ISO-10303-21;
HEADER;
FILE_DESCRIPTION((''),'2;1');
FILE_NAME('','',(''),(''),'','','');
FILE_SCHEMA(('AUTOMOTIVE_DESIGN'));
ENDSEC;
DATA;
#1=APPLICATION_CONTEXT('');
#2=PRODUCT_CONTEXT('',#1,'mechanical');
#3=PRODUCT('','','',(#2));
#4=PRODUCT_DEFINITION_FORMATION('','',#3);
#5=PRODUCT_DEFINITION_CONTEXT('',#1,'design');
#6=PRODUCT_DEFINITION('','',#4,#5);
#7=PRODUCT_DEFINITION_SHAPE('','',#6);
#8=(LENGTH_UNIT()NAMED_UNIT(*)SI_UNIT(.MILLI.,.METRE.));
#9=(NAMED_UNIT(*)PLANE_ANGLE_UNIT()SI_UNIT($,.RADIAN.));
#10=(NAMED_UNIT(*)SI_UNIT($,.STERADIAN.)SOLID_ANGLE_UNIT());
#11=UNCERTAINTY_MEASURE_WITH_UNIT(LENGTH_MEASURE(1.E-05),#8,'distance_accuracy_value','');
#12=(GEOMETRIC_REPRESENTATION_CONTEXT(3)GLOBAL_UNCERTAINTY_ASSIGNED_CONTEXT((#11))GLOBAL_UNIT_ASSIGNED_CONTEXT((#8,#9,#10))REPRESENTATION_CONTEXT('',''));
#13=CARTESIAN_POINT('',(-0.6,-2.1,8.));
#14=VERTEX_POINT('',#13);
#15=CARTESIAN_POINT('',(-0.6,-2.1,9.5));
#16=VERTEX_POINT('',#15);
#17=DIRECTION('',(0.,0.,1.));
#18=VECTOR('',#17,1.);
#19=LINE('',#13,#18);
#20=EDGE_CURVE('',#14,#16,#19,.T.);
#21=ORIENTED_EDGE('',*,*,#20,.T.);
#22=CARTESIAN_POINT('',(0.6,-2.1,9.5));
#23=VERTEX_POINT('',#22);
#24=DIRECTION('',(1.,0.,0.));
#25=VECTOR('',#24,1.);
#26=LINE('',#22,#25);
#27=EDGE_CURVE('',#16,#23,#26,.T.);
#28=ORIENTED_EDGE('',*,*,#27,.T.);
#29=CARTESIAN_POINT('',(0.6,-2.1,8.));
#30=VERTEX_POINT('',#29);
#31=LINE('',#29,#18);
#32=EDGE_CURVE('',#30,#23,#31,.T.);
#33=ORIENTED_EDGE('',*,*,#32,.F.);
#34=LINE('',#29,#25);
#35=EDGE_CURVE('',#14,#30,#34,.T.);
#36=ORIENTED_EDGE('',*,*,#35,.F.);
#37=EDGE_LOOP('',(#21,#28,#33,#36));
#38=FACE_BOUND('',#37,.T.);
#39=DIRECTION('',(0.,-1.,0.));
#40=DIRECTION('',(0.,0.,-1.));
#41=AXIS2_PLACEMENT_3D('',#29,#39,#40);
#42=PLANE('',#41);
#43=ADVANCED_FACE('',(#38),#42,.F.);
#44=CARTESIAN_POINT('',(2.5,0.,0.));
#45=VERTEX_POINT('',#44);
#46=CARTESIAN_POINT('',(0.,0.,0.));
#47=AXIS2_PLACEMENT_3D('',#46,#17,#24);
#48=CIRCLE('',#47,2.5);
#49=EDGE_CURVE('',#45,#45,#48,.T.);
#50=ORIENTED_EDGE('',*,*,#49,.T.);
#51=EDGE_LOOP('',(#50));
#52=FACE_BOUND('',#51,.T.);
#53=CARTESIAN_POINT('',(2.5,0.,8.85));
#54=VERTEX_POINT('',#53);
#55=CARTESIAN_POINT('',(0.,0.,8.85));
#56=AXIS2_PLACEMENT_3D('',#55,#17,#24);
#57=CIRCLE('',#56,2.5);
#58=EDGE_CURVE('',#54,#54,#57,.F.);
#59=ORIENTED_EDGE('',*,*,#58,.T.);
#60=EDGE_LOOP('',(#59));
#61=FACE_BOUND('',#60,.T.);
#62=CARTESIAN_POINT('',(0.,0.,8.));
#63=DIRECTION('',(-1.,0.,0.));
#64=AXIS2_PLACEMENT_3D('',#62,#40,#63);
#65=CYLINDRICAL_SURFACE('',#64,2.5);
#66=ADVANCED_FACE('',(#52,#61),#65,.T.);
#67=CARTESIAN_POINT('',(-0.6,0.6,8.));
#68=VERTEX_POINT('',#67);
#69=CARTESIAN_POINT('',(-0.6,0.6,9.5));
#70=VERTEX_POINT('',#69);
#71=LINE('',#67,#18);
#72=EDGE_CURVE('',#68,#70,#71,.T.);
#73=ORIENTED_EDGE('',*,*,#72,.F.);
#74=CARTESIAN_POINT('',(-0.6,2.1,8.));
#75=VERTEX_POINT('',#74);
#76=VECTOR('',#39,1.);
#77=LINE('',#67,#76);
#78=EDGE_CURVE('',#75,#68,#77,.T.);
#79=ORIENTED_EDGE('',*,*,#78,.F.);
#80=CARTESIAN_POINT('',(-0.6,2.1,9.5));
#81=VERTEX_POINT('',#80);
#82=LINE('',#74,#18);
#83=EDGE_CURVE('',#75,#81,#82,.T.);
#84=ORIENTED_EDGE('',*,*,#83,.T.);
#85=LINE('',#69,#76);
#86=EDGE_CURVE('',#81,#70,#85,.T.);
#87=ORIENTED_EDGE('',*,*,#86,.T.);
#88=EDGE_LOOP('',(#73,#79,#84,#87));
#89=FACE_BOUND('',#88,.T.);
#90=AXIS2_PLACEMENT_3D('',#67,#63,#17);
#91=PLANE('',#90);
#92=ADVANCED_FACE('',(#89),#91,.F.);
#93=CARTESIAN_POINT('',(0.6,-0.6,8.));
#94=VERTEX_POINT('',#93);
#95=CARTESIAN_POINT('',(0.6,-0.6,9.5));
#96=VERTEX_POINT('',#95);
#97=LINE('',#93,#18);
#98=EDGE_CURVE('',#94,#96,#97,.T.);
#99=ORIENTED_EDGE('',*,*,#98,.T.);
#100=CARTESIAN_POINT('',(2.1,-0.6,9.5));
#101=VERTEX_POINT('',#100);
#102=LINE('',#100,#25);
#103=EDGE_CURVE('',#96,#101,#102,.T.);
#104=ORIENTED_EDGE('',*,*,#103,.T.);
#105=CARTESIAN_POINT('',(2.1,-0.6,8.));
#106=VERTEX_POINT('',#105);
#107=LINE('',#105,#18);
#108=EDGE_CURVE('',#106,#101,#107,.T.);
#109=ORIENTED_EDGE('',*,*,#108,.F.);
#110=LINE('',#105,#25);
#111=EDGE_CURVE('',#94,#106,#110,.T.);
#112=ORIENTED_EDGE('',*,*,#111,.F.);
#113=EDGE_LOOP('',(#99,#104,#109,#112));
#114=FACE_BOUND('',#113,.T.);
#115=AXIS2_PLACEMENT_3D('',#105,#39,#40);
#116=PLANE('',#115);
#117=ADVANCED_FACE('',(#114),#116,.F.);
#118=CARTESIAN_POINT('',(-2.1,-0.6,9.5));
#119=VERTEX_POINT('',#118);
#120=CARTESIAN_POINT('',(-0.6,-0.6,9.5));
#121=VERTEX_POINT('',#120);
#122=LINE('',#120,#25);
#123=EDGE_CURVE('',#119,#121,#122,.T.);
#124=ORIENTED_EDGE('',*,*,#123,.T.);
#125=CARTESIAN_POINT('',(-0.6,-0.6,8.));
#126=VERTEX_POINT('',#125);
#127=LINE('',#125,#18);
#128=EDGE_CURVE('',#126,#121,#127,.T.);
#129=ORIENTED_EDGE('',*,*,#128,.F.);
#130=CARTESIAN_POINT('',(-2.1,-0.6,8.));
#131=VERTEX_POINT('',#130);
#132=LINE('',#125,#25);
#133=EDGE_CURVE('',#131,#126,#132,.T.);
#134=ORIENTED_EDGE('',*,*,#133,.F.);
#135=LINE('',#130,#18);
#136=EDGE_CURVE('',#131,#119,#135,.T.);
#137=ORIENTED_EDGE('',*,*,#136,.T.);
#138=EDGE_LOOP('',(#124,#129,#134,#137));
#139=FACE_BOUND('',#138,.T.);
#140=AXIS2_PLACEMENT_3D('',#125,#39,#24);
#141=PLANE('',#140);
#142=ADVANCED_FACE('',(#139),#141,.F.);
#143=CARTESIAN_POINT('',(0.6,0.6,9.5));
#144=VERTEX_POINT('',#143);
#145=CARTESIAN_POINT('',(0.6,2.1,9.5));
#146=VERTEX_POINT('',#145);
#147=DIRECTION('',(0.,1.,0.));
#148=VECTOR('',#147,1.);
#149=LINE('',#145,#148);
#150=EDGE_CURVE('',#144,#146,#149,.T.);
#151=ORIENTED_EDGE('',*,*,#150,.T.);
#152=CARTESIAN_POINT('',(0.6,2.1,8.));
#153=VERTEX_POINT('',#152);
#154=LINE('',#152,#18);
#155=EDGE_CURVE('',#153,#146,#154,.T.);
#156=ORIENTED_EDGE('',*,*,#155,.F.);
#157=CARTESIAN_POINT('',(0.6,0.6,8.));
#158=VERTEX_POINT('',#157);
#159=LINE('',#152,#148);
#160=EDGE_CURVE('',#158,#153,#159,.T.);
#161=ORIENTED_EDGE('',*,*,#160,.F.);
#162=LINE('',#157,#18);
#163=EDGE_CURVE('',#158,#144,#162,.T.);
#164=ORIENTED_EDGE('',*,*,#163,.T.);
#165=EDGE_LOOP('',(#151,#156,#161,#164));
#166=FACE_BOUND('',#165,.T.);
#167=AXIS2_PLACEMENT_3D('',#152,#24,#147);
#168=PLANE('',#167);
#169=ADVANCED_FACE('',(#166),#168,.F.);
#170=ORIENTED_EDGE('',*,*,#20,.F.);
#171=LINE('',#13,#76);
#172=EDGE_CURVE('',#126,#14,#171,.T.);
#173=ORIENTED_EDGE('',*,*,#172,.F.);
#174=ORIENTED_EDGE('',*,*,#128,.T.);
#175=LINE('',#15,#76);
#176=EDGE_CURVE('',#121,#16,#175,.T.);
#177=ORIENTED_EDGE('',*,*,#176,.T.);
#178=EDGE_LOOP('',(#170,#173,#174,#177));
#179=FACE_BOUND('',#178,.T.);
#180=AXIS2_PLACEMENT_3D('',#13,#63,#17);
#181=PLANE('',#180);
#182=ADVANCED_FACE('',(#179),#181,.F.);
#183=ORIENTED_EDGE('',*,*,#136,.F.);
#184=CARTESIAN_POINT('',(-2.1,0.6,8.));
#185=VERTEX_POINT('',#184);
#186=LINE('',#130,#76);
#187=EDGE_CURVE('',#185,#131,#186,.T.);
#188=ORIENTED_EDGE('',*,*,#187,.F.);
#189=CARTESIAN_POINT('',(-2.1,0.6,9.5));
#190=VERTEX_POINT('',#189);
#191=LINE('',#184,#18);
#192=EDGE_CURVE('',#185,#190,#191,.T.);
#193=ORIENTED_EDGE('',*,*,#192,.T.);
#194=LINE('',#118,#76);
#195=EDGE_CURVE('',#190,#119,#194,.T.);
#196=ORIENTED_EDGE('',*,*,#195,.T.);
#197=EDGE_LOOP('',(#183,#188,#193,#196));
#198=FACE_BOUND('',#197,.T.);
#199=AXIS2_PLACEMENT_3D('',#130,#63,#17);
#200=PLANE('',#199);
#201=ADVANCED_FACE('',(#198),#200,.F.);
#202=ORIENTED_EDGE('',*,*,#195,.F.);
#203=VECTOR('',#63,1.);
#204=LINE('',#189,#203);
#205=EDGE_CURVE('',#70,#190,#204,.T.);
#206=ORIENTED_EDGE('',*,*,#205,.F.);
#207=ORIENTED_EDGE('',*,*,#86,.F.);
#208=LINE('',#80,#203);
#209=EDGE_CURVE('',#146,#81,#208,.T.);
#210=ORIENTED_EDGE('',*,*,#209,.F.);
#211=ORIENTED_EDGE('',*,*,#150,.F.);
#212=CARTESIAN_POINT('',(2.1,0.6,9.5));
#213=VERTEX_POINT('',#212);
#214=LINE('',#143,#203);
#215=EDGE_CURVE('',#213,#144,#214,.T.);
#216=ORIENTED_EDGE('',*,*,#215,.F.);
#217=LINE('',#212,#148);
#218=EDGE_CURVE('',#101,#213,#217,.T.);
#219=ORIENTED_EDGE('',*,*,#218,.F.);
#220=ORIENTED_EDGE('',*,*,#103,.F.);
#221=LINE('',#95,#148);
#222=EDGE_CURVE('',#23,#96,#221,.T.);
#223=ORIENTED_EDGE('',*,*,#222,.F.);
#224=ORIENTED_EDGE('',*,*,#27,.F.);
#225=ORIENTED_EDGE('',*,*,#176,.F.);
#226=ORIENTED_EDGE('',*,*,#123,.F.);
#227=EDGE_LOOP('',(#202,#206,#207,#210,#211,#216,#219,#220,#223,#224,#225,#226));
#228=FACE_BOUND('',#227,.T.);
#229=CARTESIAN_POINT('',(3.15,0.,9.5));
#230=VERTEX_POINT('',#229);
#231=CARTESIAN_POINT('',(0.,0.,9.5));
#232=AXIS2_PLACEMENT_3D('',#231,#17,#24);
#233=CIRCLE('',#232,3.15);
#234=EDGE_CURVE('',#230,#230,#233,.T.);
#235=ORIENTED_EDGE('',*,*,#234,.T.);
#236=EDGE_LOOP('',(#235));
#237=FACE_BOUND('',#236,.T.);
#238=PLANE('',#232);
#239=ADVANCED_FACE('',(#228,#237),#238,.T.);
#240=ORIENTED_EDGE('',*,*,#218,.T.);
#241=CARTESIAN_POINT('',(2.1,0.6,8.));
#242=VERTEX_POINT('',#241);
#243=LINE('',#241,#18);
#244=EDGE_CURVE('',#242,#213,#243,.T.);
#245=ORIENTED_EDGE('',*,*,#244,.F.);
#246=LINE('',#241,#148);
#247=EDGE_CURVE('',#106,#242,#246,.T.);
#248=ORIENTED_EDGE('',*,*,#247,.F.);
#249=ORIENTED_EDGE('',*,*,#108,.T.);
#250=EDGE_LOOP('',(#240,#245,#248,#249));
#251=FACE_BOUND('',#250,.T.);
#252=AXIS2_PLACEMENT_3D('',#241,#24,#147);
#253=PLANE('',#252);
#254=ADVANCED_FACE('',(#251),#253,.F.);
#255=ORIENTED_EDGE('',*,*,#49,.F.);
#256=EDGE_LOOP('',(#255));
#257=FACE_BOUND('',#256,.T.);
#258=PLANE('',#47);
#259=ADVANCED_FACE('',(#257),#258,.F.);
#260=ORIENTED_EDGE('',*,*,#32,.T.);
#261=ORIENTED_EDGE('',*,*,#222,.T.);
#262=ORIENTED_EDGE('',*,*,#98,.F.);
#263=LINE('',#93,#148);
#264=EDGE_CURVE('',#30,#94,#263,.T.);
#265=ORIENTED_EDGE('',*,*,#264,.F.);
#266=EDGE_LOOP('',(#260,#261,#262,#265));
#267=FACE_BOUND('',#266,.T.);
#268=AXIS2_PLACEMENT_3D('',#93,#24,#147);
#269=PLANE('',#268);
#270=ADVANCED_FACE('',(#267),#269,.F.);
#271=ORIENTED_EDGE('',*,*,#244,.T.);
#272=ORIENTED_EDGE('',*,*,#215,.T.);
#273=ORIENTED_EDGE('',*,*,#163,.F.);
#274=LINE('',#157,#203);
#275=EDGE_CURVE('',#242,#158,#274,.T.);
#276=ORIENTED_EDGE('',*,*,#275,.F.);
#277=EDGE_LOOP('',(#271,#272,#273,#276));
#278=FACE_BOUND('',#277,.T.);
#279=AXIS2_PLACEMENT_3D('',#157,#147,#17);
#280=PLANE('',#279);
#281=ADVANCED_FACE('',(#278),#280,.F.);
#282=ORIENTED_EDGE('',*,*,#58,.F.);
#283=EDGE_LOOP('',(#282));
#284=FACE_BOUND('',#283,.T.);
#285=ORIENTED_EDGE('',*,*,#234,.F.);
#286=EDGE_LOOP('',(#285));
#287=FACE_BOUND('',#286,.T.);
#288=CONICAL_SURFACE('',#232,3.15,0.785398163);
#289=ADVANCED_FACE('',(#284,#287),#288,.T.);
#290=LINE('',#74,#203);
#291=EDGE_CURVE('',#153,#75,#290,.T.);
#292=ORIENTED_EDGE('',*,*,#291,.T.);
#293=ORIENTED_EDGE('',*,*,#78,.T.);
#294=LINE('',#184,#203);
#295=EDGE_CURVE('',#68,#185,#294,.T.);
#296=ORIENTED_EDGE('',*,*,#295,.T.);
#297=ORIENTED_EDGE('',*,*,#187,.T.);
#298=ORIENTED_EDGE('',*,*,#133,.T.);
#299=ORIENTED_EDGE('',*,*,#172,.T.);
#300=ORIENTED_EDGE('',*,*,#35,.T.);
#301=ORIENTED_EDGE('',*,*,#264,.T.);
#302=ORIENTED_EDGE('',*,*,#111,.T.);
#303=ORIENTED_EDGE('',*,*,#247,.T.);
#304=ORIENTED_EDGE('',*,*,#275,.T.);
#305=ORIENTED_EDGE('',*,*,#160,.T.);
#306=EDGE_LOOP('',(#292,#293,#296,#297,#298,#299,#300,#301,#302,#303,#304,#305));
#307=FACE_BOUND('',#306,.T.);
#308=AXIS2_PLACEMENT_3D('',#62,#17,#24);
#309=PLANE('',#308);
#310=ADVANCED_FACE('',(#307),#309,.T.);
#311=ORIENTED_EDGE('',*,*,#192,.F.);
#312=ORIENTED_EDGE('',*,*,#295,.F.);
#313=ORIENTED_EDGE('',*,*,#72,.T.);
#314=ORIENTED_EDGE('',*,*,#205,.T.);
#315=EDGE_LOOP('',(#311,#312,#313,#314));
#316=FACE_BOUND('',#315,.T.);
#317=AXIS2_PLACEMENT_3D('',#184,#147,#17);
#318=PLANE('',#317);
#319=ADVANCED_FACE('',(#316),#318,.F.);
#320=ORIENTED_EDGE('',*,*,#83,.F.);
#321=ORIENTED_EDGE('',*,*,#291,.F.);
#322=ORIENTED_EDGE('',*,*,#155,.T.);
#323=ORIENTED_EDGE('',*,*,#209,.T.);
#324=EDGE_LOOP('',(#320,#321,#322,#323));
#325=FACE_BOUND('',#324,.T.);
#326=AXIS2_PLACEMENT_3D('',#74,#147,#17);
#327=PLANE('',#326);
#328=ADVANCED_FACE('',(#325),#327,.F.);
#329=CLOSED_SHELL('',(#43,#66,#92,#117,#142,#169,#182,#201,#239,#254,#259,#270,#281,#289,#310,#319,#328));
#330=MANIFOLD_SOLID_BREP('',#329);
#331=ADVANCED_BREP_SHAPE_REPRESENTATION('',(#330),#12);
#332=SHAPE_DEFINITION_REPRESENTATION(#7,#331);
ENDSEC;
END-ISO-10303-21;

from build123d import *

# Parameters (mm, degrees)
ESQUISSE1_R             = 2.5
BOSS_EXTRU_1_DEPTH      = 8
ESQUISSE2_R             = 3.15
BOSS_EXTRU_2_DEPTH      = 1.5
CHANFREIN1_SIZE         = 1.5
ENL_V_MAT_EXTRU_1_DEPTH = 1.5


with BuildPart() as part:
    # Esquisse1 → Boss.-Extru.1 (new body)
    with BuildSketch(Plane.XY):
        Circle(ESQUISSE1_R)
    extrude(amount=BOSS_EXTRU_1_DEPTH)

    # Esquisse2 → Boss.-Extru.2 (add)
    with BuildSketch(Plane.XY.offset(8)):
        Circle(ESQUISSE2_R)
    extrude(amount=BOSS_EXTRU_2_DEPTH)

    # Chanfrein1
    # the kernel refuses this chamfer: 1.5 mm, written as the material it takes off along each edge
    with BuildSketch(Plane(origin=(0, 0, 8), x_dir=(1, 0, 0), z_dir=(0, -1, 0))) as chanfrein1_piece_1_section:
        Polygon((3.15, CHANFREIN1_SIZE), (3.15 - CHANFREIN1_SIZE, 0), (3.15, 0), align=None)
    chanfrein1_piece_1 = revolve(axis=Axis((0, 0, 8), (0, 0, 1)), mode=Mode.PRIVATE)
    chanfrein1_piece_1 = chanfrein1_piece_1 - Plane(origin=(0, 0, 9.178723354), x_dir=(1, 0, 0), z_dir=(0, 0, -1)) * Cylinder(2.5, 13, mode=Mode.PRIVATE)
    add(chanfrein1_piece_1, mode=Mode.SUBTRACT)

    # Esquisse3 → Enlèv. mat.-Extru.1 (cut)
    with BuildSketch(Plane.XY.offset(9.5)):
        Polygon((-0.6, 2.1), (0.6, 2.1), (0.6, 0.6), (2.1, 0.6), (2.1, -0.6), (0.6, -0.6), (0.6, -2.1), (-0.6, -2.1), (-0.6, -0.6), (-2.1, -0.6), (-2.1, 0.6), (-0.6, 0.6), align=None)
    extrude(amount=-ENL_V_MAT_EXTRU_1_DEPTH, mode=Mode.SUBTRACT)


solid = part.part
